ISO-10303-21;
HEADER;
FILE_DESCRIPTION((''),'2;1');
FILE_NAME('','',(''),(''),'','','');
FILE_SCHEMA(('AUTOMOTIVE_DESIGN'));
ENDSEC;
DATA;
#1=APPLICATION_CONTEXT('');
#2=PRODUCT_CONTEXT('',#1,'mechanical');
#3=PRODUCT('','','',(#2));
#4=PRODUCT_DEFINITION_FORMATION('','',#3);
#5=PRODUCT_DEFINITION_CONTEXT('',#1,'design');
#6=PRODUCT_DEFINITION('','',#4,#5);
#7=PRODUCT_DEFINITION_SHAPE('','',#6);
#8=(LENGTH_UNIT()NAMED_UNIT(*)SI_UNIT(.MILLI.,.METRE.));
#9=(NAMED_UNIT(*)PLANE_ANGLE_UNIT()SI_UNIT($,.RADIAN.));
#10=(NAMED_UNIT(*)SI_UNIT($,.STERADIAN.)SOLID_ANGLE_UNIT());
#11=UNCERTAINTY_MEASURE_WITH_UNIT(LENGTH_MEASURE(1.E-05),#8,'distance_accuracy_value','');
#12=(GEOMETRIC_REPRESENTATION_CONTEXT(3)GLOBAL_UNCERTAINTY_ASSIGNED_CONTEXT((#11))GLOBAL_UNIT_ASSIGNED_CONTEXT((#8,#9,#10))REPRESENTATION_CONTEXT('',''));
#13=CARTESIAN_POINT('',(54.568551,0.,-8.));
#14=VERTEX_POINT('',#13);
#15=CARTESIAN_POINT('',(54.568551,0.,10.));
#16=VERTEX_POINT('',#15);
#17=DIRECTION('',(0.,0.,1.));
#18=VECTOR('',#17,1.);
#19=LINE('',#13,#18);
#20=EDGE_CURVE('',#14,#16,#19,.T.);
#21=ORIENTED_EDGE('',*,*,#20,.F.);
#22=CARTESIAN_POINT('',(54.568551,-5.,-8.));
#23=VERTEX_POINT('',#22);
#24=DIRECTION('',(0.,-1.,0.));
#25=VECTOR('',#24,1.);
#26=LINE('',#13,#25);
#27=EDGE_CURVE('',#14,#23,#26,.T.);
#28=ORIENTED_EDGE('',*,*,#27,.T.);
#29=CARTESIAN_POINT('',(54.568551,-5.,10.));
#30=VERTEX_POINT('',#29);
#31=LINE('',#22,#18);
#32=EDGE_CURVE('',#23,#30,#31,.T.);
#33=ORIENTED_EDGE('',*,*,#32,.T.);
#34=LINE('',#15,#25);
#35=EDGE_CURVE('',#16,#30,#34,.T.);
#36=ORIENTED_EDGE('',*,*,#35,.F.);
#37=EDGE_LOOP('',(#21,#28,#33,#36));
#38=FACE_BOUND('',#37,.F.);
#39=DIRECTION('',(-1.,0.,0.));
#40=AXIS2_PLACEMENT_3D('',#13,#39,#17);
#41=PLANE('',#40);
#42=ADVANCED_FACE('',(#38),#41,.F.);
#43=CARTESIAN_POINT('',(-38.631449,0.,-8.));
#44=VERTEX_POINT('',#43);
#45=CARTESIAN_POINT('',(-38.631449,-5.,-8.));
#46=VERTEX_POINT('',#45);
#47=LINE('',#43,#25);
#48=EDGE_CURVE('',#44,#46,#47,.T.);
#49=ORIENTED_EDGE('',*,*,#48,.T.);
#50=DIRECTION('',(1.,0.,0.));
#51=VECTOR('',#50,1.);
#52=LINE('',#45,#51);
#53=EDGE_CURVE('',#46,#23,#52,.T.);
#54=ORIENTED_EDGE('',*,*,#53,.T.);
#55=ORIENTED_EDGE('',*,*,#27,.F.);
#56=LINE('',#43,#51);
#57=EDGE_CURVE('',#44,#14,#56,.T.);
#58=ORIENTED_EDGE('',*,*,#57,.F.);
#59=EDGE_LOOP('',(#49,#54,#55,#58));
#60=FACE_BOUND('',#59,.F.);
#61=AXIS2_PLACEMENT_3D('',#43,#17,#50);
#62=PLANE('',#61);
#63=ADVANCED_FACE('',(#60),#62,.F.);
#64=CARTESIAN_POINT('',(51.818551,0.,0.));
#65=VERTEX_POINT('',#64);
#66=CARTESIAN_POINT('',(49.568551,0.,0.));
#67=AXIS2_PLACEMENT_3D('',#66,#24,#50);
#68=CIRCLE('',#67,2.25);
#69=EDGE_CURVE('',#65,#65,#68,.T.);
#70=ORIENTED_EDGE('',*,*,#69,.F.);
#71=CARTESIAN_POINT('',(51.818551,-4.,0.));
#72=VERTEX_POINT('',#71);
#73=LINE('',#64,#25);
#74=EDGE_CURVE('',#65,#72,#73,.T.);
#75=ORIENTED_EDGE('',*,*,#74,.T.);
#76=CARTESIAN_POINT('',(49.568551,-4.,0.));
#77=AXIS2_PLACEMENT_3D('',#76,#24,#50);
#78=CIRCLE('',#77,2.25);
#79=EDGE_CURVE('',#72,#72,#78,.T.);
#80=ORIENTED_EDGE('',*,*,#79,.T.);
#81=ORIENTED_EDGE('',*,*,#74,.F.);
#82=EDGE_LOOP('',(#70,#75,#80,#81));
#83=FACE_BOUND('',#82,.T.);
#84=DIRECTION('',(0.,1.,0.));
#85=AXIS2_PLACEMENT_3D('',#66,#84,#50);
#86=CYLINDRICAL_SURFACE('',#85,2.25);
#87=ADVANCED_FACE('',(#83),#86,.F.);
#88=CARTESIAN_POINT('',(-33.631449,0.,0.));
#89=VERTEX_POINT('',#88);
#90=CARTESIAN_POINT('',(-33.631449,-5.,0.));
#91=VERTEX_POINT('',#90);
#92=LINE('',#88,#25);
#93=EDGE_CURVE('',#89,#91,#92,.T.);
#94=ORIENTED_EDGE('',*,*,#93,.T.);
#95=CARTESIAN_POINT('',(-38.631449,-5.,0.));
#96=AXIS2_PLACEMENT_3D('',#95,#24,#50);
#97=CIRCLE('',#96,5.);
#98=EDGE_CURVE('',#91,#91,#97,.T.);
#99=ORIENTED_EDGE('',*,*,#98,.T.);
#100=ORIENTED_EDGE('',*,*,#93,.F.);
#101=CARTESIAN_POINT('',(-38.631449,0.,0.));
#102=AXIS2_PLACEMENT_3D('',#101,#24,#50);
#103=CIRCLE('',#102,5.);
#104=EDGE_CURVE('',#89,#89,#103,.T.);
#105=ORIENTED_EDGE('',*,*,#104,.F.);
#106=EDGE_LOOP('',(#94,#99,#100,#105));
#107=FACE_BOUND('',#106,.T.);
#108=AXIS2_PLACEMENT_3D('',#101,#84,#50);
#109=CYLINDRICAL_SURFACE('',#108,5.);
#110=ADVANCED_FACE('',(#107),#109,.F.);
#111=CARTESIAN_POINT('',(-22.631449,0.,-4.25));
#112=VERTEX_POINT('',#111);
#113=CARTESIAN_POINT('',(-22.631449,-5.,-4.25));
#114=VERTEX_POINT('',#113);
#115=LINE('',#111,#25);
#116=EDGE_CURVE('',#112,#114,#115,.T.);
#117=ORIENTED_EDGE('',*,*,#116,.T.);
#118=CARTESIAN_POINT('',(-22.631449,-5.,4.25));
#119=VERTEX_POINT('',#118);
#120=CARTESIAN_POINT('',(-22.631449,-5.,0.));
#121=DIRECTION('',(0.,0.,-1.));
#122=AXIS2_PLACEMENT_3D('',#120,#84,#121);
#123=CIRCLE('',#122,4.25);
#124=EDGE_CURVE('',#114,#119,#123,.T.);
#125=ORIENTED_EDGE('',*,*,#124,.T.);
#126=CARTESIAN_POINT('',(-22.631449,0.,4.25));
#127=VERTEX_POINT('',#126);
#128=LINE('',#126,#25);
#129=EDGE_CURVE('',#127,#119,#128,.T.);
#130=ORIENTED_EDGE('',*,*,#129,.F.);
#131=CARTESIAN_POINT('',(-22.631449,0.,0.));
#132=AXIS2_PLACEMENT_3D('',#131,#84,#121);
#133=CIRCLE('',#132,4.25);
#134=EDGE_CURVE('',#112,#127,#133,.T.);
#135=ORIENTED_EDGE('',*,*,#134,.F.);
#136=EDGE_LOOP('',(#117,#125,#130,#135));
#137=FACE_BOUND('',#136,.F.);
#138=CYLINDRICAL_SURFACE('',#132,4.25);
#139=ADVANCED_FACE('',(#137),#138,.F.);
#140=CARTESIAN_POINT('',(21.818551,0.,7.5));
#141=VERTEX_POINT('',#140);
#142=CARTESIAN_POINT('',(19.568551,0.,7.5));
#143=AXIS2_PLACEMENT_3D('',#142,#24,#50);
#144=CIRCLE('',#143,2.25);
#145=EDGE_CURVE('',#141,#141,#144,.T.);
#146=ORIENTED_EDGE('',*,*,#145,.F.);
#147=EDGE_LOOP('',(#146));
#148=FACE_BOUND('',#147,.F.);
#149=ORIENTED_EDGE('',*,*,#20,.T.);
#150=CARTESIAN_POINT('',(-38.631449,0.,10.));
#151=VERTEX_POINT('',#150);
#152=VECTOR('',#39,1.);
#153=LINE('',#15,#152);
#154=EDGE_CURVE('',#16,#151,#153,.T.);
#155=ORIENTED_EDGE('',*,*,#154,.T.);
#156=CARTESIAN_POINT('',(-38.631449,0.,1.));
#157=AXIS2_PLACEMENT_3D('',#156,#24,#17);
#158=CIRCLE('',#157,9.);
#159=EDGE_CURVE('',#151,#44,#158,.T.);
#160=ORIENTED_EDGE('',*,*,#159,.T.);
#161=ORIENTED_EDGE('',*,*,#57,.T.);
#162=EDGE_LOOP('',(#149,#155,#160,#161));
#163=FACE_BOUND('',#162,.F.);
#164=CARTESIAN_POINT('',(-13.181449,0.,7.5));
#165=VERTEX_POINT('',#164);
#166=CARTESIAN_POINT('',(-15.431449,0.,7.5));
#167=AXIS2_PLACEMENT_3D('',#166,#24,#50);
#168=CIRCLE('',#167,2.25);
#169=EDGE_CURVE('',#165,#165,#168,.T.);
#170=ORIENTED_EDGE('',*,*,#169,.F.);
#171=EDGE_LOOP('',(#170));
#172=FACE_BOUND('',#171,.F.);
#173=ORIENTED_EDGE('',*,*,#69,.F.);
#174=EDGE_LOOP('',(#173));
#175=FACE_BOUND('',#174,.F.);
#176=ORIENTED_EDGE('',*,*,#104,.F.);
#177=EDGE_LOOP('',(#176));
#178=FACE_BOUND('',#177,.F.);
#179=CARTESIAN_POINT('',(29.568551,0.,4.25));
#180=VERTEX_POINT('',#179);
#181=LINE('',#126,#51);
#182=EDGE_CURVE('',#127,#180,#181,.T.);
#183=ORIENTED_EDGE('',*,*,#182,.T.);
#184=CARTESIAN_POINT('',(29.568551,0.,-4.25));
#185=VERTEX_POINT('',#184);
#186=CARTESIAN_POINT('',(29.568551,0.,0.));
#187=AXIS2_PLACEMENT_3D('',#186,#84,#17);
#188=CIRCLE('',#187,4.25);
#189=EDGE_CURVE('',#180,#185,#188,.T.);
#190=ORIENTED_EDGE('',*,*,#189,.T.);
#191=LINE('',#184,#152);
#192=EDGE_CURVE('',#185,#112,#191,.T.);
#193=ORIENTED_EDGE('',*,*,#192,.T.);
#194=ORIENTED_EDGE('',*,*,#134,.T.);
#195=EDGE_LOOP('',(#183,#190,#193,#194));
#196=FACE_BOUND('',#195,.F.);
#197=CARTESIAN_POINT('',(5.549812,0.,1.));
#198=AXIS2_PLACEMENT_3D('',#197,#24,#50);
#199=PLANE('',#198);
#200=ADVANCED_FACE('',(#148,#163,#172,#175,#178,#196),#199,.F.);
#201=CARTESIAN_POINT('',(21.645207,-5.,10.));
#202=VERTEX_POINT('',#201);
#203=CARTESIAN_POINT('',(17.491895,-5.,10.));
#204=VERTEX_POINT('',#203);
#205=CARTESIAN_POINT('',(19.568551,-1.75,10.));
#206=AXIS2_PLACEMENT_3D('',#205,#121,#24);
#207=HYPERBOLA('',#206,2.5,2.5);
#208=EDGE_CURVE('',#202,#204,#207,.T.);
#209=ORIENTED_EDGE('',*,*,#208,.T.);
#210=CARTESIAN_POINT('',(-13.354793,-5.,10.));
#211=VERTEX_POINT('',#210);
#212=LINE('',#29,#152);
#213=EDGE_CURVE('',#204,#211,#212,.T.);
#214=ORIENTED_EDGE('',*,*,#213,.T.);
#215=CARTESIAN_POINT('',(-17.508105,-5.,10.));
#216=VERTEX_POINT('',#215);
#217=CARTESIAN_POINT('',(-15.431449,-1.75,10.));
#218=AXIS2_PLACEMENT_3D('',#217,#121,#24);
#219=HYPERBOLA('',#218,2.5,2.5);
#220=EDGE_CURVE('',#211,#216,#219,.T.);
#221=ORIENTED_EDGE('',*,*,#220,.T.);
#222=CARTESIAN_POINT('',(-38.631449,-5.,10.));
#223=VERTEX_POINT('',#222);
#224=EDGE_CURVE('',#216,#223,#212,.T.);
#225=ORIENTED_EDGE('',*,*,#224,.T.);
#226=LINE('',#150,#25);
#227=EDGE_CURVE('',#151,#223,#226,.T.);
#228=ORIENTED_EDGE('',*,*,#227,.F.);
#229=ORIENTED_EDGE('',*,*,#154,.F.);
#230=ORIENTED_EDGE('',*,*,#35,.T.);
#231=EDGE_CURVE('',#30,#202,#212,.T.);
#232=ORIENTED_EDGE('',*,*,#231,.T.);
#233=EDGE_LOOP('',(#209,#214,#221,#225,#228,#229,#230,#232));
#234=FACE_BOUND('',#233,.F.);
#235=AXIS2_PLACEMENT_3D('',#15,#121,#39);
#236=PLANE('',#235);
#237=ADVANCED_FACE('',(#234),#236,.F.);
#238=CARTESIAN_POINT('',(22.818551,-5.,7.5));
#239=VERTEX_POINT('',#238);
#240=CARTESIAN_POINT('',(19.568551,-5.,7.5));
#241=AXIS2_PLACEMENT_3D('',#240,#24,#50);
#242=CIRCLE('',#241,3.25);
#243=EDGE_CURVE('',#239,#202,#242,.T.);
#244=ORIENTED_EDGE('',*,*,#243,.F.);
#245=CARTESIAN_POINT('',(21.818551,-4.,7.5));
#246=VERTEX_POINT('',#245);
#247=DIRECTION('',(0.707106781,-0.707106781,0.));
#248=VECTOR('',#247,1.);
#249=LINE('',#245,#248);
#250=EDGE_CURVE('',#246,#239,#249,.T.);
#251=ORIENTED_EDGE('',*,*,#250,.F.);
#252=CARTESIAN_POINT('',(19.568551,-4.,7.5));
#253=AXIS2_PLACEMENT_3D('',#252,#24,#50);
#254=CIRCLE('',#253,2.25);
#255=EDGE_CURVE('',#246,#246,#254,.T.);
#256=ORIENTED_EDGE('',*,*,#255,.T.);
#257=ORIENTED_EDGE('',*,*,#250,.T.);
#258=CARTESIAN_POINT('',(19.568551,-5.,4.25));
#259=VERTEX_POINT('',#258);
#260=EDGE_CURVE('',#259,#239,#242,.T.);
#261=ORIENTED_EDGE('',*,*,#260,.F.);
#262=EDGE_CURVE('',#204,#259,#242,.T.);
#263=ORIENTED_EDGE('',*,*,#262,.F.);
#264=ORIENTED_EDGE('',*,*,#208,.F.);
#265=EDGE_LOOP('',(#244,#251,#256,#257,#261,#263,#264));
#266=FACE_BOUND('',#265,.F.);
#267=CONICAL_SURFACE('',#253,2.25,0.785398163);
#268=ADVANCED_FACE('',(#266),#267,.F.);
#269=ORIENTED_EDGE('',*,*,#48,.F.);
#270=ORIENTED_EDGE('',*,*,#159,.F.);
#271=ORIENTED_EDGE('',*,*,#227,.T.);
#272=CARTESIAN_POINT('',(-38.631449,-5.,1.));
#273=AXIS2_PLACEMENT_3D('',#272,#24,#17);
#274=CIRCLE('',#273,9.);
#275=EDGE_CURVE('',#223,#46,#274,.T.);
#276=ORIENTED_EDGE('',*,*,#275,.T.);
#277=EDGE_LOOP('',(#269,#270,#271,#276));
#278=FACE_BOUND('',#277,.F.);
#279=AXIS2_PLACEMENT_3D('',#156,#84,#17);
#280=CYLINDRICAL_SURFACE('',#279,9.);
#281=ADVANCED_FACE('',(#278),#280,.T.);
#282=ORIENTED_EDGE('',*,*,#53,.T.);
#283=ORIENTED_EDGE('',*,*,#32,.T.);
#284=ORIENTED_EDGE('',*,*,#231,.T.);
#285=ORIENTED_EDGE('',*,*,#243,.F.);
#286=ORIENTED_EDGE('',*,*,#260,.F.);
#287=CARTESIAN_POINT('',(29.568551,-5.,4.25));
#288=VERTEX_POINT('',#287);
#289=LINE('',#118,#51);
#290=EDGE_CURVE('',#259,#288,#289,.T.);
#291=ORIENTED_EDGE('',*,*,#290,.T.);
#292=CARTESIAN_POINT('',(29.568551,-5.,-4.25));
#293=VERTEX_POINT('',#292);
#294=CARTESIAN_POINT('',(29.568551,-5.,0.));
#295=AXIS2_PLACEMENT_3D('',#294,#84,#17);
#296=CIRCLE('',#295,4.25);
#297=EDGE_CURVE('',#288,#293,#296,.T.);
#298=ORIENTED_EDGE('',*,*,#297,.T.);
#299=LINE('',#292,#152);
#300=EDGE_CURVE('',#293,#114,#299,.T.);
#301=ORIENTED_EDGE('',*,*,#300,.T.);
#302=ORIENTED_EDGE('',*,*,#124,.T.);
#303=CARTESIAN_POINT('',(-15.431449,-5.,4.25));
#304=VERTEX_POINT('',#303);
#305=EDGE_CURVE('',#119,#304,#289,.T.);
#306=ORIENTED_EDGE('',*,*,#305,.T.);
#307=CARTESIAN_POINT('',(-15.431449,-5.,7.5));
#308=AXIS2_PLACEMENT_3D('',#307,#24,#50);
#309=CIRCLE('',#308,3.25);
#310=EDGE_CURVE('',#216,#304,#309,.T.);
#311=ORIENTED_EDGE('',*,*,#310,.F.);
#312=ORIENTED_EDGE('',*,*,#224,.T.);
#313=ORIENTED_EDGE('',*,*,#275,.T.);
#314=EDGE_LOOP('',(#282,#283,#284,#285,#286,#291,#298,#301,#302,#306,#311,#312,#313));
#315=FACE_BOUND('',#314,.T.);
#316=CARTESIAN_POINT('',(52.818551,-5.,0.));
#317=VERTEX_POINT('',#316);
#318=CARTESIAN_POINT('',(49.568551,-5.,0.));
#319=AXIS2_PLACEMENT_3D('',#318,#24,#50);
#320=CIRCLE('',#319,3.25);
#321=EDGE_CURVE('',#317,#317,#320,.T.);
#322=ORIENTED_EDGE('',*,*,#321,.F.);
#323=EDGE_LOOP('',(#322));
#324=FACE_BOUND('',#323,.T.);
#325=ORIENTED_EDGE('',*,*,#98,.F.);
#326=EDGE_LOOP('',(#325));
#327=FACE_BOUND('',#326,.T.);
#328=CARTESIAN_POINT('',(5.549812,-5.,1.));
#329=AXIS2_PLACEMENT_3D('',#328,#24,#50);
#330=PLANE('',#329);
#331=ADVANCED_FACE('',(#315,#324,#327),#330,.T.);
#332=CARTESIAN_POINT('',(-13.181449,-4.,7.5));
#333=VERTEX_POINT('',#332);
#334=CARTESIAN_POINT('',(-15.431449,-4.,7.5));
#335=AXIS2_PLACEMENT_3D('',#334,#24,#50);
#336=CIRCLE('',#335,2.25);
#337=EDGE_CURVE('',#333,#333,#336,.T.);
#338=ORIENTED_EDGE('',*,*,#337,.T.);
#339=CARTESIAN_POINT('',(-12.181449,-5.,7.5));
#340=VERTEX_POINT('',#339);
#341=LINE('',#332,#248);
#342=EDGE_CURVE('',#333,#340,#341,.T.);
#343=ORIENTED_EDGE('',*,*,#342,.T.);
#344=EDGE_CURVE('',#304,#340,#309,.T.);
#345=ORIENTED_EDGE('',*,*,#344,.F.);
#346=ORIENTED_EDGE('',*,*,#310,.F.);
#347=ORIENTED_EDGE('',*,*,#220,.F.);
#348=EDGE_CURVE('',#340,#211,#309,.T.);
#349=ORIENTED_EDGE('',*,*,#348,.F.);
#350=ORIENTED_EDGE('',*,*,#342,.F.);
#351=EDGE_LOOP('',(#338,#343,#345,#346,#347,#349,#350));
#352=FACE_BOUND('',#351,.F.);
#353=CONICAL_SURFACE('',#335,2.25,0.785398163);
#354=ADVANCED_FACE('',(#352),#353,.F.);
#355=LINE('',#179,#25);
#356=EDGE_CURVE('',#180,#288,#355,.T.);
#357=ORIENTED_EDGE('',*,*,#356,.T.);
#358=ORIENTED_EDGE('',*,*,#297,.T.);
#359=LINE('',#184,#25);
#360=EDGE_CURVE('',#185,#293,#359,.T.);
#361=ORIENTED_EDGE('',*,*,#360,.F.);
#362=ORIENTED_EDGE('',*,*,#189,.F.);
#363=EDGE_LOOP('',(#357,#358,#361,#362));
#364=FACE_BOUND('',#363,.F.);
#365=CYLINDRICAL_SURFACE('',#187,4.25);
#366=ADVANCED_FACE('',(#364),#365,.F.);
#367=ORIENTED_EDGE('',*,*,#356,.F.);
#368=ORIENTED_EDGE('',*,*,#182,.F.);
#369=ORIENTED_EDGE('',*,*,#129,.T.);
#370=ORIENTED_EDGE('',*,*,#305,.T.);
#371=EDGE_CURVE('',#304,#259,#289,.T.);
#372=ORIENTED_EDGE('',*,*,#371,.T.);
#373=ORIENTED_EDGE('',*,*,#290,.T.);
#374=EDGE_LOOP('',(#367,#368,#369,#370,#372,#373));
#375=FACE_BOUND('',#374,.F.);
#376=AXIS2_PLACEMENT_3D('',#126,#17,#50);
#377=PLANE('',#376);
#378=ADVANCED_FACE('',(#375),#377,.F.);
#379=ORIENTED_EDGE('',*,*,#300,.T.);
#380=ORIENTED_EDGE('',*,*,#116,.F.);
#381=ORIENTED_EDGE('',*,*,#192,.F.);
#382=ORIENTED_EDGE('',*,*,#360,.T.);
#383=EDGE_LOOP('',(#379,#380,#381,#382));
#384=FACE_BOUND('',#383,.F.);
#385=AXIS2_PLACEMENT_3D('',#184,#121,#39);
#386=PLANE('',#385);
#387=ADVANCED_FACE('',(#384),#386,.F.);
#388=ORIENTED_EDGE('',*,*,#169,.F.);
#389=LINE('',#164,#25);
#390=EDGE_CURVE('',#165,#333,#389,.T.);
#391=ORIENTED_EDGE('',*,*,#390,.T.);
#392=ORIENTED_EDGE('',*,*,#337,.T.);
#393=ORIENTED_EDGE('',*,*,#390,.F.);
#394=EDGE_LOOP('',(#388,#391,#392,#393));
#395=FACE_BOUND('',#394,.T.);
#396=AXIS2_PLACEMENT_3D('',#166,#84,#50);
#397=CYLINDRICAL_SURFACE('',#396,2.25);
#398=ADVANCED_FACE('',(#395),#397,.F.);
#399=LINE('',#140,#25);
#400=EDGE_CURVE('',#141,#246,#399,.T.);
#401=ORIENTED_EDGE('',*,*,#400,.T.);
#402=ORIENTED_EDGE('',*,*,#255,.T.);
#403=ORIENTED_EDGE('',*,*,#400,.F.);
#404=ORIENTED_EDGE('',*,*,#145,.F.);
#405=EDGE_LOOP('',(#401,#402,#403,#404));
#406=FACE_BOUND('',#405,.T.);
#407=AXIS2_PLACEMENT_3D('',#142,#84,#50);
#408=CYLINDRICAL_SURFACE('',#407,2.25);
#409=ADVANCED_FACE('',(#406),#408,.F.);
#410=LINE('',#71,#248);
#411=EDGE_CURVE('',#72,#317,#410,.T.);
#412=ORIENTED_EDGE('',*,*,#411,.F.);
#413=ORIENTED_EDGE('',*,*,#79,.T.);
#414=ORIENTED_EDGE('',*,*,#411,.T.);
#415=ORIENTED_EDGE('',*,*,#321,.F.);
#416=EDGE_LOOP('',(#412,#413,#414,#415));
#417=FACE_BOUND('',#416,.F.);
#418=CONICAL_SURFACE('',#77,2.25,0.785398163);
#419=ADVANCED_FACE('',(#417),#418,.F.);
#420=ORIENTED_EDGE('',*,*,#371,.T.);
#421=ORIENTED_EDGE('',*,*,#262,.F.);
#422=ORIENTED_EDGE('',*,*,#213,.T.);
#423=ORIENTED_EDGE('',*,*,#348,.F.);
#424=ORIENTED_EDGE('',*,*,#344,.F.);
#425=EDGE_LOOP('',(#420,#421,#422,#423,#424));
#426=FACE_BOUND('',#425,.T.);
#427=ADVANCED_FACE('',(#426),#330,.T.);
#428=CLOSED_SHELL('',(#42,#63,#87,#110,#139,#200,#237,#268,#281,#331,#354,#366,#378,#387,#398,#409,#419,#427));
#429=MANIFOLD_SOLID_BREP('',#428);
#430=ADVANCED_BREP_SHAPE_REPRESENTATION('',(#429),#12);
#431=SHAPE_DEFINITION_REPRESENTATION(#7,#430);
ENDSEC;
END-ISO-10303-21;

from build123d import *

# Parameters (mm, degrees)
F0_R     = 5
F0_R_2   = 2.25
F1_DEPTH = 5


# Not quite as in the source:
# - a fillet or chamfer that OpenCascade refuses, or shapes differently, is made with other operations: its cross-section is extruded or revolved along the edge and cut away or added


with BuildPart() as f1:
    # F0 (on Front) → F1 (new body)
    with BuildSketch(Plane.XZ):
        with BuildLine():
            Line((54.5685509182, 10), (-38.6314490818, 10))
            ThreePointArc((-38.6314490818, 10), (-47.6314490818, 1), (-38.6314490818, -8))
            Line((-38.6314490818, -8), (54.5685509182, -8))
            Line((54.5685509182, -8), (54.5685509182, 10))
        make_face()
        with Locations((-38.6314490818, 0)):
            Circle(F0_R, mode=Mode.SUBTRACT)
        with BuildLine():
            ThreePointArc((-22.6314490818, -4.25), (-26.8814490818, 0), (-22.6314490818, 4.25))
            Line((-22.6314490818, 4.25), (29.5685509182, 4.25))
            ThreePointArc((29.5685509182, 4.25), (33.8185509182, 0), (29.5685509182, -4.25))
            Line((29.5685509182, -4.25), (-22.6314490818, -4.25))
        make_face(mode=Mode.SUBTRACT)
        with Locations((49.5685509182, 0)):
            Circle(F0_R_2, mode=Mode.SUBTRACT)
        with Locations((-15.4314490818, 7.5)):
            Circle(F0_R_2, mode=Mode.SUBTRACT)
        with Locations((19.5685509182, 7.5)):
            Circle(F0_R_2, mode=Mode.SUBTRACT)
    extrude(amount=F1_DEPTH)

    # F2: chamfer of 1 on 3 edges, made by hand

    # F2_s1 → F2_t2 (revolve, cut)
    with BuildSketch(Plane.XY.offset(7.5)):
        Polygon((-13.1814490818, -4), (-12.1814490818, -5), (-13.1814490818, -5), align=None)
    revolve(axis=Axis((-15.4314490818, -5, 7.5), (0, -1, 0)), mode=Mode.SUBTRACT)

    # F2_s3 → F2_t4 (revolve, cut)
    with BuildSketch(Plane.XY.offset(7.5)):
        Polygon((21.8185509182, -4), (22.8185509182, -5), (21.8185509182, -5), align=None)
    revolve(axis=Axis((19.5685509182, -5, 7.5), (0, -1, 0)), mode=Mode.SUBTRACT)

    # F2_s5 → F2_t6 (revolve, cut)
    with BuildSketch(Plane.XY):
        Polygon((51.8185509182, -4), (52.8185509182, -5), (51.8185509182, -5), align=None)
    revolve(axis=Axis((49.5685509182, -5, 0), (0, -1, 0)), mode=Mode.SUBTRACT)


solid = f1.part
